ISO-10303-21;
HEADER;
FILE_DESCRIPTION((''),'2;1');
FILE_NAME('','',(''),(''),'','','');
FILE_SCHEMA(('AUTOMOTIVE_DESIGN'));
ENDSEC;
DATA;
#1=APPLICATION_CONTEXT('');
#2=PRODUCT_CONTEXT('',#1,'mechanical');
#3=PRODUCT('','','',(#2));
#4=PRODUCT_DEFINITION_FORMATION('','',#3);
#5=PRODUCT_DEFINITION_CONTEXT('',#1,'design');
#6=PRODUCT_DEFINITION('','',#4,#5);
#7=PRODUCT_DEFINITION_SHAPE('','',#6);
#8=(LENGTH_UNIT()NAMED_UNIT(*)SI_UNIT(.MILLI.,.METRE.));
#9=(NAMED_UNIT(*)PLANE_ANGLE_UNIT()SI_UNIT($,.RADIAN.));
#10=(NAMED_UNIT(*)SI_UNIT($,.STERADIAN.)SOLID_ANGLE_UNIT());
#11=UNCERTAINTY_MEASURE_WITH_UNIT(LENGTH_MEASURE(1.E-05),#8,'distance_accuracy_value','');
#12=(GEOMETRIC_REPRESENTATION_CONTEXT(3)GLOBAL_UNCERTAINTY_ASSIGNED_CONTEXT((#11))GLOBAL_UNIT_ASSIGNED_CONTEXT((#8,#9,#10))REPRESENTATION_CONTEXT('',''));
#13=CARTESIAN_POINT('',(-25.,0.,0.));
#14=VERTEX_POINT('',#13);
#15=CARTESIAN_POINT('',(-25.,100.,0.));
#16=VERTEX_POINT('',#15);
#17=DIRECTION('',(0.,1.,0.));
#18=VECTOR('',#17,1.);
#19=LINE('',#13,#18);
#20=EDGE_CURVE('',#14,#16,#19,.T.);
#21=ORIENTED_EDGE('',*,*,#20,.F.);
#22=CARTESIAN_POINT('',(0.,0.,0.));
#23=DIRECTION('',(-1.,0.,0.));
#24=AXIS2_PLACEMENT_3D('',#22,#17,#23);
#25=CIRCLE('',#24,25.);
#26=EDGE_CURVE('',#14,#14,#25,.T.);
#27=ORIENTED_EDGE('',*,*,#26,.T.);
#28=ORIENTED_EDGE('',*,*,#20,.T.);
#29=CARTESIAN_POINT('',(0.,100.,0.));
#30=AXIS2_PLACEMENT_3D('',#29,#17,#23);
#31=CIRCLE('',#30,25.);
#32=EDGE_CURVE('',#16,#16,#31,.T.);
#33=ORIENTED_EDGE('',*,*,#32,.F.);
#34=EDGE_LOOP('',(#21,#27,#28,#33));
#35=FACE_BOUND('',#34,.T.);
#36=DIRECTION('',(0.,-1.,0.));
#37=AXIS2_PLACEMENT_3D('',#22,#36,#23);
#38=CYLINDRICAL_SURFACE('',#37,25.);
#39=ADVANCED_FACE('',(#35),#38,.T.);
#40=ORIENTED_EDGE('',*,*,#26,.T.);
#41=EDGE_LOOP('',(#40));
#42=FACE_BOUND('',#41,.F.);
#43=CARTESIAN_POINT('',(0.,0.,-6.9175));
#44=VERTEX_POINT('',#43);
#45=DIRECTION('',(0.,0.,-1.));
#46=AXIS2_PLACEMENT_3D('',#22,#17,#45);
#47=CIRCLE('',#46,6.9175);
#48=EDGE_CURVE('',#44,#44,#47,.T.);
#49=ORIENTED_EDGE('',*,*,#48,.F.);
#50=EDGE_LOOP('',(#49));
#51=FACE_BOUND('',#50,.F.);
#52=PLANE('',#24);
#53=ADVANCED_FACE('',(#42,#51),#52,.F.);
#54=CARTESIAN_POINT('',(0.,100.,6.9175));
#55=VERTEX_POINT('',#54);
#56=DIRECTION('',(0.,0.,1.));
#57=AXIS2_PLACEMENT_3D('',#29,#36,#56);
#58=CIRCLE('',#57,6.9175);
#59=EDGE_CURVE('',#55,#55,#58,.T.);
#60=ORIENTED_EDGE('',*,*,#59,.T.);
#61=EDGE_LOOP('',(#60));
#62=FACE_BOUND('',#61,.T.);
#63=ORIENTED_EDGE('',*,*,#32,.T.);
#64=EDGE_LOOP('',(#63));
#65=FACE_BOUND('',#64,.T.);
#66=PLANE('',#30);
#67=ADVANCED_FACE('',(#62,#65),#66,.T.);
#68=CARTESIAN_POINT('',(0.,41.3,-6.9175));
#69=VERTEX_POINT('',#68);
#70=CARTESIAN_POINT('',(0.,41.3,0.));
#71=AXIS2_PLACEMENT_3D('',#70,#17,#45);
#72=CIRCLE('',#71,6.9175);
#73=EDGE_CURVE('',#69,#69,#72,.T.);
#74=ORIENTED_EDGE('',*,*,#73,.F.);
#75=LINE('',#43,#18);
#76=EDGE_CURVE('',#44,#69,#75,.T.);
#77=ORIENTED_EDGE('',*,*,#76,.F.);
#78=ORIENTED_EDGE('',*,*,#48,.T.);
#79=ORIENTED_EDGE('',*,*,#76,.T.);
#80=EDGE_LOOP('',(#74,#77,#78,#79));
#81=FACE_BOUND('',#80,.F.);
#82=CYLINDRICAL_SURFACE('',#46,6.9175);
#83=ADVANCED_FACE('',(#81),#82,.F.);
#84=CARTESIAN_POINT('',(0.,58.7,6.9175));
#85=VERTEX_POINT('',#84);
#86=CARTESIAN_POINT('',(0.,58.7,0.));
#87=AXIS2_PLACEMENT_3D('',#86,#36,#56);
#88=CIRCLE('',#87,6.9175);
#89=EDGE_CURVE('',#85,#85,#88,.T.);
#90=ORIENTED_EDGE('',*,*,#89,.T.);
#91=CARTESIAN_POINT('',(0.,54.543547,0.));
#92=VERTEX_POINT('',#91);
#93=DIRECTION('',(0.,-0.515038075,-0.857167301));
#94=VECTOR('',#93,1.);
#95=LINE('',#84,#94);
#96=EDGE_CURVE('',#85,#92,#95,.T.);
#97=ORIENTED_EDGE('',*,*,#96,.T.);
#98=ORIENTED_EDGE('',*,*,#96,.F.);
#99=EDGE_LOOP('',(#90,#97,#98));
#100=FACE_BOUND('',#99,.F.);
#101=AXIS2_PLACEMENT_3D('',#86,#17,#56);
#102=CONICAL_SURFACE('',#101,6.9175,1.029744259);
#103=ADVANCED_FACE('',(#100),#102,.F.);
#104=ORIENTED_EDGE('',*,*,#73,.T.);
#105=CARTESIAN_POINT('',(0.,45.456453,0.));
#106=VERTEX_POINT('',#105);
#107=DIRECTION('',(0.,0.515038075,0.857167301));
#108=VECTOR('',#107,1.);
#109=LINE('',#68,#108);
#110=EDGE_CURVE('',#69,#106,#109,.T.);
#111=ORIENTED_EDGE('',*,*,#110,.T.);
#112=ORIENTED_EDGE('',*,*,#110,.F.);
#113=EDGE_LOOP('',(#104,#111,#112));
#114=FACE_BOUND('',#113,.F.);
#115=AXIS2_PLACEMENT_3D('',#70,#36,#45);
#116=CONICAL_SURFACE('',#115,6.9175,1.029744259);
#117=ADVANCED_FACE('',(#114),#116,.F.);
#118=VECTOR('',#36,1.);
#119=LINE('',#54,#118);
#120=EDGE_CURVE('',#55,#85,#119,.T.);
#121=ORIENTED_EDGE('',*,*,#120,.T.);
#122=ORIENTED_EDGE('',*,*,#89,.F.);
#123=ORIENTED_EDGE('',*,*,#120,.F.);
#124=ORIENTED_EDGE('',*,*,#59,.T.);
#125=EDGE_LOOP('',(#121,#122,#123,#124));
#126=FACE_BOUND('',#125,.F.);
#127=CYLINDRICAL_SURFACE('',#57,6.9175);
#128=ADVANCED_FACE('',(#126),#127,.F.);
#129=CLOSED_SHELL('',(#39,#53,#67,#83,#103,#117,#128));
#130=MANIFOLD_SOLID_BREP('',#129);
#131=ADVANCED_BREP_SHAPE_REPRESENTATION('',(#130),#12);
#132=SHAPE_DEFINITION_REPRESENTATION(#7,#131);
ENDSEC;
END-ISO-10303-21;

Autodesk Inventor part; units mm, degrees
ref_plane "YZ Plane" through (0, 0, 0) normal (1, 0, 0) x (0, 1, 0)
ref_plane "XZ Plane" through (0, 0, 0) normal (0, 1, 0) x (-1, 0, 0)
ref_plane "XY Plane" through (0, 0, 0) normal (0, 0, 1) x (1, 0, 0)
sketch "Szkic1" plane through (0, 0, 0) normal (0, 1, 0) x (-1, 0, 0)
  circle A0 centre (0, 0) radius 25
extrude "Wyciągnięcie proste1" add sketch "Szkic1" along normal blind 100
sketch "Szkic2" plane through (0, 0, 0) normal (0, -1, 0) x (1, 0, 0)
  circle A0 centre (0, 0) radius 25 projected
hole "Otwór1" at (0, 0, 0) direction (0, 1, 0) diameter 13.835 depth 41.3 tip angle 118 thread size "M16x2" class "6H" standard "ISO Metric profile"
sketch "Szkic3" plane through (0, 100, 0) normal (0, 1, 0) x (1, 0, 0)
  line L0 (0, 0) -> (-13.3904, -21.1115)
  circle A0 centre (0, 0) radius 25 projected
hole "Otwór2" at (0, 100, 0) direction (0, -1, 0) diameter 13.835 depth 41.3 tip angle 118 thread size "M16x2" class "6H" standard "ISO Metric profile"
properties part number "mocowanie_pod_hak"
